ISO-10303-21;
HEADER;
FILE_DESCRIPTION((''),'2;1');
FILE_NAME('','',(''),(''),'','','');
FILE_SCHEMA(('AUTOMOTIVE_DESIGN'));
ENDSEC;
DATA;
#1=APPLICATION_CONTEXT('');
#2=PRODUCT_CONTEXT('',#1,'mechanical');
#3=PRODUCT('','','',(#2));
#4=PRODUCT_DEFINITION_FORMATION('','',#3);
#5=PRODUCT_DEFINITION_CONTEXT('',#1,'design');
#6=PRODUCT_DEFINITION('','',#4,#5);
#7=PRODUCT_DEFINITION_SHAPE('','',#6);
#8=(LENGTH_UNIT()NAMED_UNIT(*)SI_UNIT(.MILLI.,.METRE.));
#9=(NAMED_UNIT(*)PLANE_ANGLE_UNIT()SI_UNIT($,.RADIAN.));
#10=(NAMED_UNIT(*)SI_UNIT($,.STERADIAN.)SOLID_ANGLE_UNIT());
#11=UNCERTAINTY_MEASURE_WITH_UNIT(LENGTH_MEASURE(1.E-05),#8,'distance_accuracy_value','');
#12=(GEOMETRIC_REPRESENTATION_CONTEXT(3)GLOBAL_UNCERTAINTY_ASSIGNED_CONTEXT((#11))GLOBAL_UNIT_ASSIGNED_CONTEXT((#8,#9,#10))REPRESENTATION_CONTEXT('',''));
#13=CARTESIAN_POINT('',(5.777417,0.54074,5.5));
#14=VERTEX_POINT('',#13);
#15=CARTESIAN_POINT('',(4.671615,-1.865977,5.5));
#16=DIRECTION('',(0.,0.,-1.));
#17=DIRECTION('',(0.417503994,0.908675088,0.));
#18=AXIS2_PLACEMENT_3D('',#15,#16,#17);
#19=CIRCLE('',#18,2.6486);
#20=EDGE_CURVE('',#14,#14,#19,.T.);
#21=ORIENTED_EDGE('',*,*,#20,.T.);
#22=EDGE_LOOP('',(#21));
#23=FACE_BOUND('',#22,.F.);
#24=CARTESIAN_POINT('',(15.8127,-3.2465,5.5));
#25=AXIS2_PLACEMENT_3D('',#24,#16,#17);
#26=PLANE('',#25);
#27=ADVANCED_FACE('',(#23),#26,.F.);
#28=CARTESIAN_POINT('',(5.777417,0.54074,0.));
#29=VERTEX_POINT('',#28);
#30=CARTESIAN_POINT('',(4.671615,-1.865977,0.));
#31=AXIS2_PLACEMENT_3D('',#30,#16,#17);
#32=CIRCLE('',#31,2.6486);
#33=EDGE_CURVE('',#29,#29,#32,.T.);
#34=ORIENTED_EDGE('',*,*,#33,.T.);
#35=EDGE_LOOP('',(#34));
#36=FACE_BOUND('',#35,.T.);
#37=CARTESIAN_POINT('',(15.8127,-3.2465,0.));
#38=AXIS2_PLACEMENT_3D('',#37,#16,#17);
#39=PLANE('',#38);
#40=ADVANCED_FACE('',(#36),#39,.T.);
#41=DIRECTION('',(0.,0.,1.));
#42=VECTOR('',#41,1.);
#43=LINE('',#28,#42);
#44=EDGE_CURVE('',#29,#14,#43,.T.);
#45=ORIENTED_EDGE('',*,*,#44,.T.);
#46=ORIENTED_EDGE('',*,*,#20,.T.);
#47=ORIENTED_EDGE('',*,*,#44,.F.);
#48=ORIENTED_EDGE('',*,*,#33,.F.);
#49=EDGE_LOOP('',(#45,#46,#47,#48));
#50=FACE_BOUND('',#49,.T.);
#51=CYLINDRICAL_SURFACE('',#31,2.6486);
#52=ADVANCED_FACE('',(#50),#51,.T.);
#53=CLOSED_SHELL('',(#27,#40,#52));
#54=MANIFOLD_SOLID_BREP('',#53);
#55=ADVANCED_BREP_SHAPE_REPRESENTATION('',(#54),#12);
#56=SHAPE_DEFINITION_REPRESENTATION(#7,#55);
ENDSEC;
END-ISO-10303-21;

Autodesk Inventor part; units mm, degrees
ref_plane "YZ Plane" through (0, 0, 0) normal (1, 0, 0) x (0, 1, 0)
ref_plane "XZ Plane" through (0, 0, 0) normal (0, 1, 0) x (-1, 0, 0)
ref_plane "XY Plane" through (0, 0, 0) normal (0, 0, 1) x (1, 0, 0)
ref_plane "Work Plane1" through (15.8127, -3.2465, 0) normal (0, 0, -1) x (0.417504, 0.9086751, 0)
sketch "Sketch1" plane through (15.8127, -3.2465, 0) normal (0, 0, -1) x (0.417504, 0.9086751, 0)
  line L0 (-7.897, -2) -> (1.603, -2) projected
  line L1 (1.603, -2) -> (1.603, -5.5) projected
  line L2 (1.603, -5.5) -> (-7.897, -5.5) projected
  line L3 (-7.897, -5.5) -> (-7.897, -2) projected
  line L4 (1.603, -19) -> (-7.897, -19) projected
  line L5 (-7.897, -19) -> (-7.897, -15.5) projected
  line L6 (-7.897, -15.5) -> (1.603, -15.5) projected
  line L7 (1.603, -15.5) -> (1.603, -19) projected
  arc A0 (9.303, -26.8555) -> (8.303, -25.8555) centre (8.303, -26.8555) ccw projected
  line L8 (9.303, -26.8555) -> (9.303, -30) projected
  line L9 (9.303, -30) -> (-16.397, -30) projected
  line L10 (-16.397, -30) -> (-16.397, -20.4723) projected
  arc A1 (-15.397, -19.4723) -> (-16.397, -20.4723) centre (-15.397, -20.4723) ccw projected
  line L11 (-15.397, -19.4723) -> (-13.5347, -19.4723) projected
  arc A2 (-13.5347, -19.4723) -> (-12.5347, -18.4723) centre (-13.5347, -18.4723) ccw projected
  line L12 (-12.5347, -18.4723) -> (-12.5347, 0) projected
  line L13 (-12.5347, 0) -> (-1, 0) projected
  arc A3 (-1, 0) -> (0, 1) centre (-1, 1) ccw projected
  line L14 (0, 1) -> (0, 2) projected
  arc A4 (1, 3) -> (0, 2) centre (1, 2) ccw projected
  line L15 (1, 3) -> (3.5653, 3) projected
  arc A5 (4.5653, 2) -> (3.5653, 3) centre (3.5653, 2) ccw projected
  line L16 (4.5653, 2) -> (4.5653, -24.8555) projected
  arc A6 (4.5653, -24.8555) -> (5.5653, -25.8555) centre (5.5653, -24.8555) ccw projected
  line L17 (5.5653, -25.8555) -> (8.303, -25.8555) projected
  line L18 (2.603, -17.5) -> (2.603, -2) projected
  line L19 (2.603, -2) -> (-10.897, -2) projected
  line L20 (-10.897, -2) -> (-10.897, -17.5) projected
  line L21 (-10.897, -17.5) -> (2.603, -17.5) projected
  circle A7 centre (6.603, -27.5) radius 1 projected
  circle A8 centre (-13.897, -21) radius 1 projected
  circle A9 centre (1.603, 0.5) radius 1 projected
  circle A10 centre (-3.397, -10.7) radius 2.6486
  point P0 (-3.6519, -15.7241)
  dimension "d0" = 11.2
  dimension "d2" = 10.5
  dimension "d3" = 5
extrude "Extrusion1" add sketch "Sketch1" against normal up to surface (5.5 mm away) contours A10
properties part number "00_KES400_Lens"
